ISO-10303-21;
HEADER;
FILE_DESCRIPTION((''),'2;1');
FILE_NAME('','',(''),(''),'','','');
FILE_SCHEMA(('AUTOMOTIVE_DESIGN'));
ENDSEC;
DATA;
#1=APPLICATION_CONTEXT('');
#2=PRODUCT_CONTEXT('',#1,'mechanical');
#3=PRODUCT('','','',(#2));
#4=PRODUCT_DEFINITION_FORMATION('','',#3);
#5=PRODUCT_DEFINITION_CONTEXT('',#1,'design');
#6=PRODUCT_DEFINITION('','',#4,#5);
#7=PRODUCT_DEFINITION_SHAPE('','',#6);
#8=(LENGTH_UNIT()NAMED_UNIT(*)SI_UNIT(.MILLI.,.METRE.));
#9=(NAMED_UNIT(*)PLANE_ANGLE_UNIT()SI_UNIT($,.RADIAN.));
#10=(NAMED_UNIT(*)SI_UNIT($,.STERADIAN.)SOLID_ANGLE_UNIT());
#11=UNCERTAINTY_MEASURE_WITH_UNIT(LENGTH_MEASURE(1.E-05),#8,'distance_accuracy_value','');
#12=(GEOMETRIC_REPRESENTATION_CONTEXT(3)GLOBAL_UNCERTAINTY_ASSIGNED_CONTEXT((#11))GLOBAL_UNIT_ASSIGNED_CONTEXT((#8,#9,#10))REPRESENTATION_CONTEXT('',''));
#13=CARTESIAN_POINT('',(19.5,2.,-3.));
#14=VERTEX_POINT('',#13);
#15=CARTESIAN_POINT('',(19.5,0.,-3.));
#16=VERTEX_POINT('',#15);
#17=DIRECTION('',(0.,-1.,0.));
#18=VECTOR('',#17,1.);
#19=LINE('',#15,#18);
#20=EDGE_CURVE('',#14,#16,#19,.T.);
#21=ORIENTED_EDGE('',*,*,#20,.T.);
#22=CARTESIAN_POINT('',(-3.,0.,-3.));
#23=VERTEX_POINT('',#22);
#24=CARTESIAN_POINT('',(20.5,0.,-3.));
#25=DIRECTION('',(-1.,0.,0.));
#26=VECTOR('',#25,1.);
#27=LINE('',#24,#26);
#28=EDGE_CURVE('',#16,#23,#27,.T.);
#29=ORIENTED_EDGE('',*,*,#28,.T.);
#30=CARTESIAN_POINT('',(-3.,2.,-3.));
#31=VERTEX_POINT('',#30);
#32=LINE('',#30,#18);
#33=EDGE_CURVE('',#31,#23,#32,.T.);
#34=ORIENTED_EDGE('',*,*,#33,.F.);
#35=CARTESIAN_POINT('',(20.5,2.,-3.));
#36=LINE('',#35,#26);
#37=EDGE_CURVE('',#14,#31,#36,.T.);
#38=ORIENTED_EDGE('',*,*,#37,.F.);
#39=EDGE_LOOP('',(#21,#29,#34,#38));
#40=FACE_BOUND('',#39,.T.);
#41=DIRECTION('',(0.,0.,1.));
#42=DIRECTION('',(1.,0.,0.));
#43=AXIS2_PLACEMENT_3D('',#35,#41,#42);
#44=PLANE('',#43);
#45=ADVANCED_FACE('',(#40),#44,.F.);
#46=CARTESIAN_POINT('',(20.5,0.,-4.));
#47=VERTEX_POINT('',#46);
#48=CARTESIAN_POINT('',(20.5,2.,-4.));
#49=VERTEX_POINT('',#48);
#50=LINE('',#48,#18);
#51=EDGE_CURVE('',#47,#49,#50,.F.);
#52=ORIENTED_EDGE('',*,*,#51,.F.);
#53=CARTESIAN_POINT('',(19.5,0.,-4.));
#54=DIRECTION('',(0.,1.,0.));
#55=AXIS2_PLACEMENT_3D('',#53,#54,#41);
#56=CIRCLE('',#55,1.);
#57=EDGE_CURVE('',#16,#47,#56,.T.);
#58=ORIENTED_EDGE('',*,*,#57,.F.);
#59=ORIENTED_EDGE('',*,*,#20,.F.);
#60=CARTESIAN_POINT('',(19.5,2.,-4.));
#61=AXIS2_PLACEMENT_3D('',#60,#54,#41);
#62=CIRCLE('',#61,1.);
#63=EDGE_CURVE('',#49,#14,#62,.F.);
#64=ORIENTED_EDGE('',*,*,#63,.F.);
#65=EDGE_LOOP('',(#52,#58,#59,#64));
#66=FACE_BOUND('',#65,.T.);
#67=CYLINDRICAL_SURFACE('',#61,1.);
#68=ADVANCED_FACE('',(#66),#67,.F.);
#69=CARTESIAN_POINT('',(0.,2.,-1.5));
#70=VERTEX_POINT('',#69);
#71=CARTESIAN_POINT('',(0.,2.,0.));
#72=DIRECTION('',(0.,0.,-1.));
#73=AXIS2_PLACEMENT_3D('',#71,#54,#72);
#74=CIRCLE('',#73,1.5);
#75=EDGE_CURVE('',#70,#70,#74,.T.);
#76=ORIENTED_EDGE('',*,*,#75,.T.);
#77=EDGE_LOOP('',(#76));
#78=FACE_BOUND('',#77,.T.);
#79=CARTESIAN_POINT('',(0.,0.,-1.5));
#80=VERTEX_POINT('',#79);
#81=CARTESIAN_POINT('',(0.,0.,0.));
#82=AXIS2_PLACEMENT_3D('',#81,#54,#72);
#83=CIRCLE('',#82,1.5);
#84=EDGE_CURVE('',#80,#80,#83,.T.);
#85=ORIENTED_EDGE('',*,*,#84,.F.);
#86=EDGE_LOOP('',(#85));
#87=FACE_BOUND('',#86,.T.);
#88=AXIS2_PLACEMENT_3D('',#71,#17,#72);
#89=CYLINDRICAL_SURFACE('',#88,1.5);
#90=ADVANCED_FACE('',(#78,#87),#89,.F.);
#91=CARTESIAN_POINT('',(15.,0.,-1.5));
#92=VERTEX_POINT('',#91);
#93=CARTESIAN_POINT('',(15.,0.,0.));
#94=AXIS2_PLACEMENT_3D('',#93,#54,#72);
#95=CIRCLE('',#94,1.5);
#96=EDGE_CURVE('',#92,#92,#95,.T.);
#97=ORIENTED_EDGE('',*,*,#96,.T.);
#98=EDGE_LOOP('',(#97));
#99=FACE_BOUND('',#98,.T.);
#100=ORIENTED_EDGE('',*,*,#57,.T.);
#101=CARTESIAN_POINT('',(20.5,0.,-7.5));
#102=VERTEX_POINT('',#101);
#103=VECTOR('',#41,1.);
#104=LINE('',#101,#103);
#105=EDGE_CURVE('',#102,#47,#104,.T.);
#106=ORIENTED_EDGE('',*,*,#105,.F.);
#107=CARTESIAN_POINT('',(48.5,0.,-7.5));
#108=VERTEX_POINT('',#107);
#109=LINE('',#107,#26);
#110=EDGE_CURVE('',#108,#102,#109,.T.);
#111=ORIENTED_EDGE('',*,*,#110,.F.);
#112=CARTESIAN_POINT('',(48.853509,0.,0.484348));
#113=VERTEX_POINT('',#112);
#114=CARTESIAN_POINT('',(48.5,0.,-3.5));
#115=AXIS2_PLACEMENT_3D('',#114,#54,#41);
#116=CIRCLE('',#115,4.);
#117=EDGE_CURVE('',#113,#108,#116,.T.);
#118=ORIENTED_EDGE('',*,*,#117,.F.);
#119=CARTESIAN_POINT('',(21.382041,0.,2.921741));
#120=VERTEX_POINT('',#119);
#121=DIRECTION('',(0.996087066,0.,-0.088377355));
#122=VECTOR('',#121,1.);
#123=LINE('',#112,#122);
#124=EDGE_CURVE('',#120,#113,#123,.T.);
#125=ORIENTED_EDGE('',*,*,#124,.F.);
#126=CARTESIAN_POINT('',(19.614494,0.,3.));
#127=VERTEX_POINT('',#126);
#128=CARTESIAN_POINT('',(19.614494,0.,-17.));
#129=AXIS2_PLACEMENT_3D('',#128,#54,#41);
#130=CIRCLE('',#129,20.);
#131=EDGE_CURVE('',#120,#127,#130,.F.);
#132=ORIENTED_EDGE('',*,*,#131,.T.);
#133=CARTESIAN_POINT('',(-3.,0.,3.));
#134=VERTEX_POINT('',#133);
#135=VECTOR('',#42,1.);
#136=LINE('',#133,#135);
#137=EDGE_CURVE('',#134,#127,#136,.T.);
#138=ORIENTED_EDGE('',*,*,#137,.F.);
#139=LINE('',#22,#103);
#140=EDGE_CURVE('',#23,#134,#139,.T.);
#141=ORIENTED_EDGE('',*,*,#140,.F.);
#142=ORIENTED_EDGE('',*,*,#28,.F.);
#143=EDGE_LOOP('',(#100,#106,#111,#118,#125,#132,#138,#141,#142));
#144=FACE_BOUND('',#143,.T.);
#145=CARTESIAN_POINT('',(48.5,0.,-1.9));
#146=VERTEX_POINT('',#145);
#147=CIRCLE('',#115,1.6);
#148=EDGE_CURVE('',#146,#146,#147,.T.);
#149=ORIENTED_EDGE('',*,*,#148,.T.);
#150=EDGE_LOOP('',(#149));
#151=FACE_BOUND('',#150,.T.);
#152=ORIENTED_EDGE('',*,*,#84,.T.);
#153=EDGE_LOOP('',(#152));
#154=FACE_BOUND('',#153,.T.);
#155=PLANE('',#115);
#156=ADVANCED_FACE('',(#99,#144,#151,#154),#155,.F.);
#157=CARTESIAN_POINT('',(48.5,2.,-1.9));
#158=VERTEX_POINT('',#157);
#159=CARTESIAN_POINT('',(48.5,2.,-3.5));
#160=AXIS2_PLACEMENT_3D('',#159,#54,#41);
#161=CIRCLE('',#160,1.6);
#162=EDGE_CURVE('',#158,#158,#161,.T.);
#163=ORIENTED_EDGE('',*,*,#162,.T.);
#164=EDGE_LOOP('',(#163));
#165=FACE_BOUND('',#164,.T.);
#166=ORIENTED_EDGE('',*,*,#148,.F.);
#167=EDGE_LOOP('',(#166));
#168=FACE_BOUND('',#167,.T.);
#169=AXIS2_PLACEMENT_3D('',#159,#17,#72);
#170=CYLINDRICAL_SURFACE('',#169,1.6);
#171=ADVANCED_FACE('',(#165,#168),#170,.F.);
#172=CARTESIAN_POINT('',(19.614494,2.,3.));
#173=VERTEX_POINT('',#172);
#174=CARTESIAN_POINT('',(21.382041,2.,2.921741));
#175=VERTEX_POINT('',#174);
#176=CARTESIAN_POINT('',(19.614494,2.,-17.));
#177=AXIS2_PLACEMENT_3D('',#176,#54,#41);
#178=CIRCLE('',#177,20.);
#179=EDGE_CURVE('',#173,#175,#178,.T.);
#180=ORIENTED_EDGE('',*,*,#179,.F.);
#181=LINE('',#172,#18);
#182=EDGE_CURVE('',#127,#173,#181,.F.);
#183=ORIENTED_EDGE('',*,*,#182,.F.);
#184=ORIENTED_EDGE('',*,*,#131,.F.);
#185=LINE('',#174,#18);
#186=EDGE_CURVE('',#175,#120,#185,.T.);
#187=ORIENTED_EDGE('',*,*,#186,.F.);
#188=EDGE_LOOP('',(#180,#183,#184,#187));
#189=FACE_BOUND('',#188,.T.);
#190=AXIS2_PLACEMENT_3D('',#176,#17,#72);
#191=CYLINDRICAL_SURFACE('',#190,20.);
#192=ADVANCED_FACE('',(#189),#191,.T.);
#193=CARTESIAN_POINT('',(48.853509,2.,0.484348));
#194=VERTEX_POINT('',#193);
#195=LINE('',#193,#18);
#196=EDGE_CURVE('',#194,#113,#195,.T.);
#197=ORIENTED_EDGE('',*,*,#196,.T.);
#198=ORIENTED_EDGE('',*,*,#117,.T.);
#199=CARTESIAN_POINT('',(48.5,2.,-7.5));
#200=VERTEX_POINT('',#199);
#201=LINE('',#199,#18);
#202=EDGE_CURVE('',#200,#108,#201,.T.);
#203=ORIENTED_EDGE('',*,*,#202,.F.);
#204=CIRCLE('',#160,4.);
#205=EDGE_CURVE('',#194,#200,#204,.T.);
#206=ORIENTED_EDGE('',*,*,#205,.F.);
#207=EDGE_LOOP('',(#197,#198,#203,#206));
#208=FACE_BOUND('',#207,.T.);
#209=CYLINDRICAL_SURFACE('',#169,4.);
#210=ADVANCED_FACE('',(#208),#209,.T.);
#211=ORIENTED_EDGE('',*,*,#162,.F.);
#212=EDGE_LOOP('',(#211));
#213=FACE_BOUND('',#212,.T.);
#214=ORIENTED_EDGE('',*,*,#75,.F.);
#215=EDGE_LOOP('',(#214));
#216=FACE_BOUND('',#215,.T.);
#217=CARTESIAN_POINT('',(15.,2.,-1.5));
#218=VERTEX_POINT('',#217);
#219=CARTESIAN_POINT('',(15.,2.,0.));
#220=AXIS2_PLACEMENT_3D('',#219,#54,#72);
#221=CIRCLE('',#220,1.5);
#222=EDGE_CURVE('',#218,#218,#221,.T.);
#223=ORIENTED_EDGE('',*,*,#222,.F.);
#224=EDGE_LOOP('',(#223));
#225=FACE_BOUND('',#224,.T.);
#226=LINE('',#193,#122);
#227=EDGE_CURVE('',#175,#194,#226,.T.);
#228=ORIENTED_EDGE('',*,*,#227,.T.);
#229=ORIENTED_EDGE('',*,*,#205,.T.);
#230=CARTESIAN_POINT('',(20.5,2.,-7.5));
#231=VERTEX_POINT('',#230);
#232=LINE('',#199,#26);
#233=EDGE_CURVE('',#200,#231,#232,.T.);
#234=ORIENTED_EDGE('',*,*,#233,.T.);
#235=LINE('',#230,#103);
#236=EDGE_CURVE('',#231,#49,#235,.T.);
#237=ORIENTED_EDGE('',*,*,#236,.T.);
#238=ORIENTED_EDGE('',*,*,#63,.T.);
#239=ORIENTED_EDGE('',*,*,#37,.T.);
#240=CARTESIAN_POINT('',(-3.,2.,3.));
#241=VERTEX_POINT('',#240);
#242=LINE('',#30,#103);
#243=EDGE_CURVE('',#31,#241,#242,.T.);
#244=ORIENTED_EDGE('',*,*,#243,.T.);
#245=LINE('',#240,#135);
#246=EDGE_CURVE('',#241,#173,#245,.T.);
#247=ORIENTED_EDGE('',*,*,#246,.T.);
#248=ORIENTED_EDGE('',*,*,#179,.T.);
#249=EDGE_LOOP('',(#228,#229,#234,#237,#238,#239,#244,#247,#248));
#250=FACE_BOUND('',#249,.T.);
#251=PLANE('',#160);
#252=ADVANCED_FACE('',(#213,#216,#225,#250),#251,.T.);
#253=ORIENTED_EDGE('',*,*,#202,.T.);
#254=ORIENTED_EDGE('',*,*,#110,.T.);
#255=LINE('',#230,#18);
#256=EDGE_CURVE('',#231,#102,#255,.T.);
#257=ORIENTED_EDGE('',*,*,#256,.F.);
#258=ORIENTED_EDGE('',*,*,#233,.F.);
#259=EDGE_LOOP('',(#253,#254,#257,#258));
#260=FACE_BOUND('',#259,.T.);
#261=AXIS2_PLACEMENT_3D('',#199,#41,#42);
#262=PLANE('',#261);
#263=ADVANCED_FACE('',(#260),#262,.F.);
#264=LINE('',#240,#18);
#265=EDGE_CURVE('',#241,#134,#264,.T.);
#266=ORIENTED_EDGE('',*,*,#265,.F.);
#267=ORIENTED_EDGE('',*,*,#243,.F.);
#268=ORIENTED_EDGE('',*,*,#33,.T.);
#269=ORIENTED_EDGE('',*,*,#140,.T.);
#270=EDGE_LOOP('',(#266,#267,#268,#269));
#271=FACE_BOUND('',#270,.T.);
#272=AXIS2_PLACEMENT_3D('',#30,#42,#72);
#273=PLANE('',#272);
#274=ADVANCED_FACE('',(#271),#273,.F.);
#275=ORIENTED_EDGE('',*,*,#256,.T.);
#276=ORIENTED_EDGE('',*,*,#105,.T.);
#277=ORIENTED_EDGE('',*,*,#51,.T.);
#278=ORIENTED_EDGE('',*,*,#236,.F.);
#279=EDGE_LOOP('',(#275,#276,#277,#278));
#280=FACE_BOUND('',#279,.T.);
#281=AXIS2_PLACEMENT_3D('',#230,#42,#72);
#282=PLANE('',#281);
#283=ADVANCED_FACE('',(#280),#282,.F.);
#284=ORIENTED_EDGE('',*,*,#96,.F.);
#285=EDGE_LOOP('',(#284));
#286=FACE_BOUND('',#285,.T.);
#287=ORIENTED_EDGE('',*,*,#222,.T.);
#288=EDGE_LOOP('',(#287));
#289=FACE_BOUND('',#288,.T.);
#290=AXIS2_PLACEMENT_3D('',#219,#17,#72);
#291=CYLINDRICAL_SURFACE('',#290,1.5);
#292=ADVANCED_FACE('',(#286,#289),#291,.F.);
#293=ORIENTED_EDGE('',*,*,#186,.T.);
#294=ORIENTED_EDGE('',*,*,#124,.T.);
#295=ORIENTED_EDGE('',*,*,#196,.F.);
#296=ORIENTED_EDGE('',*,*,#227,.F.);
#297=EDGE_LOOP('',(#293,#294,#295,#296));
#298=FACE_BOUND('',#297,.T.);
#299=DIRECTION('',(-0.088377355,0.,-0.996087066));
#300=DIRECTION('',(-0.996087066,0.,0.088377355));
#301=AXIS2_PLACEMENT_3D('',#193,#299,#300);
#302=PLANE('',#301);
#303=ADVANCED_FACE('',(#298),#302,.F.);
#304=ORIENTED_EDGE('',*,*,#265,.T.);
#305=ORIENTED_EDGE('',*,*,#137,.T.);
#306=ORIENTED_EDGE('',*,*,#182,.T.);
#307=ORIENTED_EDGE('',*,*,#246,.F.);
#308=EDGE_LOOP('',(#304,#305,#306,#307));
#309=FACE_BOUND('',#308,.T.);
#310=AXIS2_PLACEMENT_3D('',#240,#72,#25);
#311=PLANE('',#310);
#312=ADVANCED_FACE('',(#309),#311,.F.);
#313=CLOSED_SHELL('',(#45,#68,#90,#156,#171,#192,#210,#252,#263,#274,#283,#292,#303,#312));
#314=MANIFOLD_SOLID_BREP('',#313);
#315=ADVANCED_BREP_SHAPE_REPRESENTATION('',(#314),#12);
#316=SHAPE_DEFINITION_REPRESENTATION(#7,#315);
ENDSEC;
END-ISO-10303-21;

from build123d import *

# Parameters (mm, degrees)
SKETCH_2_R      = 1.5
SKETCH_2_R_2    = 1.6
EXTRUDE_2_DEPTH = 2
FILLET_1_R      = 1
FILLET_2_R      = 20


with BuildPart() as part:
    # 草图2 → 凸台-拉伸2 (new body)
    with BuildSketch(Plane(origin=(0, 0, 0), x_dir=(1, 0, 0), z_dir=(0, 1, 0))):
        with BuildLine():
            Line((20.5, 3), (-3, 3))
            Line((-3, 3), (-3, -3))
            Line((-3, -3), (20.5, -3))
            Line((20.5, -3), (48.853509418, -0.484348264))
            ThreePointArc((48.853509418, -0.484348264), (52.49608515, 3.676927871), (48.5, 7.5))
            Line((48.5, 7.5), (20.5, 7.5))
            Line((20.5, 7.5), (20.5, 3))
        make_face()
        with Locations(Location((0, 0, 0), (0, 0, 90))):
            Circle(SKETCH_2_R, mode=Mode.SUBTRACT)
        with Locations(Location((15, 0, 0), (0, 0, 90))):
            Circle(SKETCH_2_R, mode=Mode.SUBTRACT)
        with Locations(Location((48.5, 3.5, 0), (0, 0, 270))):
            Circle(SKETCH_2_R_2, mode=Mode.SUBTRACT)
    extrude(amount=EXTRUDE_2_DEPTH)

    # 圆角1
    fillet_1_edges = [part.edges().sort_by_distance(p)[0] for p in [
        (20.5, 1, -3),
    ]]
    fillet(fillet_1_edges, radius=FILLET_1_R)

    # 圆角2
    # the kernel refuses this fillet: 20 mm, written as the material it takes off along each edge
    with BuildSketch(Plane(origin=(20.5, -2.213765024, 3), x_dir=(0.9960870660689326, 0, -0.08837735462314833), z_dir=(0, 1, 0))) as fillet_2_piece_1:
        with BuildLine():
            CenterArc((FILLET_2_R * 0.0442753004743, FILLET_2_R), FILLET_2_R, 264.929735646, 5.070264354)
            Line((-FILLET_2_R * 0.0441020541488, FILLET_2_R * 0.00391293393107), (0, 0))
            Line((0, 0), (FILLET_2_R * 0.0442753004743, 0))
        make_face()
    extrude(amount=6.427530047, mode=Mode.SUBTRACT)


solid = part.part
